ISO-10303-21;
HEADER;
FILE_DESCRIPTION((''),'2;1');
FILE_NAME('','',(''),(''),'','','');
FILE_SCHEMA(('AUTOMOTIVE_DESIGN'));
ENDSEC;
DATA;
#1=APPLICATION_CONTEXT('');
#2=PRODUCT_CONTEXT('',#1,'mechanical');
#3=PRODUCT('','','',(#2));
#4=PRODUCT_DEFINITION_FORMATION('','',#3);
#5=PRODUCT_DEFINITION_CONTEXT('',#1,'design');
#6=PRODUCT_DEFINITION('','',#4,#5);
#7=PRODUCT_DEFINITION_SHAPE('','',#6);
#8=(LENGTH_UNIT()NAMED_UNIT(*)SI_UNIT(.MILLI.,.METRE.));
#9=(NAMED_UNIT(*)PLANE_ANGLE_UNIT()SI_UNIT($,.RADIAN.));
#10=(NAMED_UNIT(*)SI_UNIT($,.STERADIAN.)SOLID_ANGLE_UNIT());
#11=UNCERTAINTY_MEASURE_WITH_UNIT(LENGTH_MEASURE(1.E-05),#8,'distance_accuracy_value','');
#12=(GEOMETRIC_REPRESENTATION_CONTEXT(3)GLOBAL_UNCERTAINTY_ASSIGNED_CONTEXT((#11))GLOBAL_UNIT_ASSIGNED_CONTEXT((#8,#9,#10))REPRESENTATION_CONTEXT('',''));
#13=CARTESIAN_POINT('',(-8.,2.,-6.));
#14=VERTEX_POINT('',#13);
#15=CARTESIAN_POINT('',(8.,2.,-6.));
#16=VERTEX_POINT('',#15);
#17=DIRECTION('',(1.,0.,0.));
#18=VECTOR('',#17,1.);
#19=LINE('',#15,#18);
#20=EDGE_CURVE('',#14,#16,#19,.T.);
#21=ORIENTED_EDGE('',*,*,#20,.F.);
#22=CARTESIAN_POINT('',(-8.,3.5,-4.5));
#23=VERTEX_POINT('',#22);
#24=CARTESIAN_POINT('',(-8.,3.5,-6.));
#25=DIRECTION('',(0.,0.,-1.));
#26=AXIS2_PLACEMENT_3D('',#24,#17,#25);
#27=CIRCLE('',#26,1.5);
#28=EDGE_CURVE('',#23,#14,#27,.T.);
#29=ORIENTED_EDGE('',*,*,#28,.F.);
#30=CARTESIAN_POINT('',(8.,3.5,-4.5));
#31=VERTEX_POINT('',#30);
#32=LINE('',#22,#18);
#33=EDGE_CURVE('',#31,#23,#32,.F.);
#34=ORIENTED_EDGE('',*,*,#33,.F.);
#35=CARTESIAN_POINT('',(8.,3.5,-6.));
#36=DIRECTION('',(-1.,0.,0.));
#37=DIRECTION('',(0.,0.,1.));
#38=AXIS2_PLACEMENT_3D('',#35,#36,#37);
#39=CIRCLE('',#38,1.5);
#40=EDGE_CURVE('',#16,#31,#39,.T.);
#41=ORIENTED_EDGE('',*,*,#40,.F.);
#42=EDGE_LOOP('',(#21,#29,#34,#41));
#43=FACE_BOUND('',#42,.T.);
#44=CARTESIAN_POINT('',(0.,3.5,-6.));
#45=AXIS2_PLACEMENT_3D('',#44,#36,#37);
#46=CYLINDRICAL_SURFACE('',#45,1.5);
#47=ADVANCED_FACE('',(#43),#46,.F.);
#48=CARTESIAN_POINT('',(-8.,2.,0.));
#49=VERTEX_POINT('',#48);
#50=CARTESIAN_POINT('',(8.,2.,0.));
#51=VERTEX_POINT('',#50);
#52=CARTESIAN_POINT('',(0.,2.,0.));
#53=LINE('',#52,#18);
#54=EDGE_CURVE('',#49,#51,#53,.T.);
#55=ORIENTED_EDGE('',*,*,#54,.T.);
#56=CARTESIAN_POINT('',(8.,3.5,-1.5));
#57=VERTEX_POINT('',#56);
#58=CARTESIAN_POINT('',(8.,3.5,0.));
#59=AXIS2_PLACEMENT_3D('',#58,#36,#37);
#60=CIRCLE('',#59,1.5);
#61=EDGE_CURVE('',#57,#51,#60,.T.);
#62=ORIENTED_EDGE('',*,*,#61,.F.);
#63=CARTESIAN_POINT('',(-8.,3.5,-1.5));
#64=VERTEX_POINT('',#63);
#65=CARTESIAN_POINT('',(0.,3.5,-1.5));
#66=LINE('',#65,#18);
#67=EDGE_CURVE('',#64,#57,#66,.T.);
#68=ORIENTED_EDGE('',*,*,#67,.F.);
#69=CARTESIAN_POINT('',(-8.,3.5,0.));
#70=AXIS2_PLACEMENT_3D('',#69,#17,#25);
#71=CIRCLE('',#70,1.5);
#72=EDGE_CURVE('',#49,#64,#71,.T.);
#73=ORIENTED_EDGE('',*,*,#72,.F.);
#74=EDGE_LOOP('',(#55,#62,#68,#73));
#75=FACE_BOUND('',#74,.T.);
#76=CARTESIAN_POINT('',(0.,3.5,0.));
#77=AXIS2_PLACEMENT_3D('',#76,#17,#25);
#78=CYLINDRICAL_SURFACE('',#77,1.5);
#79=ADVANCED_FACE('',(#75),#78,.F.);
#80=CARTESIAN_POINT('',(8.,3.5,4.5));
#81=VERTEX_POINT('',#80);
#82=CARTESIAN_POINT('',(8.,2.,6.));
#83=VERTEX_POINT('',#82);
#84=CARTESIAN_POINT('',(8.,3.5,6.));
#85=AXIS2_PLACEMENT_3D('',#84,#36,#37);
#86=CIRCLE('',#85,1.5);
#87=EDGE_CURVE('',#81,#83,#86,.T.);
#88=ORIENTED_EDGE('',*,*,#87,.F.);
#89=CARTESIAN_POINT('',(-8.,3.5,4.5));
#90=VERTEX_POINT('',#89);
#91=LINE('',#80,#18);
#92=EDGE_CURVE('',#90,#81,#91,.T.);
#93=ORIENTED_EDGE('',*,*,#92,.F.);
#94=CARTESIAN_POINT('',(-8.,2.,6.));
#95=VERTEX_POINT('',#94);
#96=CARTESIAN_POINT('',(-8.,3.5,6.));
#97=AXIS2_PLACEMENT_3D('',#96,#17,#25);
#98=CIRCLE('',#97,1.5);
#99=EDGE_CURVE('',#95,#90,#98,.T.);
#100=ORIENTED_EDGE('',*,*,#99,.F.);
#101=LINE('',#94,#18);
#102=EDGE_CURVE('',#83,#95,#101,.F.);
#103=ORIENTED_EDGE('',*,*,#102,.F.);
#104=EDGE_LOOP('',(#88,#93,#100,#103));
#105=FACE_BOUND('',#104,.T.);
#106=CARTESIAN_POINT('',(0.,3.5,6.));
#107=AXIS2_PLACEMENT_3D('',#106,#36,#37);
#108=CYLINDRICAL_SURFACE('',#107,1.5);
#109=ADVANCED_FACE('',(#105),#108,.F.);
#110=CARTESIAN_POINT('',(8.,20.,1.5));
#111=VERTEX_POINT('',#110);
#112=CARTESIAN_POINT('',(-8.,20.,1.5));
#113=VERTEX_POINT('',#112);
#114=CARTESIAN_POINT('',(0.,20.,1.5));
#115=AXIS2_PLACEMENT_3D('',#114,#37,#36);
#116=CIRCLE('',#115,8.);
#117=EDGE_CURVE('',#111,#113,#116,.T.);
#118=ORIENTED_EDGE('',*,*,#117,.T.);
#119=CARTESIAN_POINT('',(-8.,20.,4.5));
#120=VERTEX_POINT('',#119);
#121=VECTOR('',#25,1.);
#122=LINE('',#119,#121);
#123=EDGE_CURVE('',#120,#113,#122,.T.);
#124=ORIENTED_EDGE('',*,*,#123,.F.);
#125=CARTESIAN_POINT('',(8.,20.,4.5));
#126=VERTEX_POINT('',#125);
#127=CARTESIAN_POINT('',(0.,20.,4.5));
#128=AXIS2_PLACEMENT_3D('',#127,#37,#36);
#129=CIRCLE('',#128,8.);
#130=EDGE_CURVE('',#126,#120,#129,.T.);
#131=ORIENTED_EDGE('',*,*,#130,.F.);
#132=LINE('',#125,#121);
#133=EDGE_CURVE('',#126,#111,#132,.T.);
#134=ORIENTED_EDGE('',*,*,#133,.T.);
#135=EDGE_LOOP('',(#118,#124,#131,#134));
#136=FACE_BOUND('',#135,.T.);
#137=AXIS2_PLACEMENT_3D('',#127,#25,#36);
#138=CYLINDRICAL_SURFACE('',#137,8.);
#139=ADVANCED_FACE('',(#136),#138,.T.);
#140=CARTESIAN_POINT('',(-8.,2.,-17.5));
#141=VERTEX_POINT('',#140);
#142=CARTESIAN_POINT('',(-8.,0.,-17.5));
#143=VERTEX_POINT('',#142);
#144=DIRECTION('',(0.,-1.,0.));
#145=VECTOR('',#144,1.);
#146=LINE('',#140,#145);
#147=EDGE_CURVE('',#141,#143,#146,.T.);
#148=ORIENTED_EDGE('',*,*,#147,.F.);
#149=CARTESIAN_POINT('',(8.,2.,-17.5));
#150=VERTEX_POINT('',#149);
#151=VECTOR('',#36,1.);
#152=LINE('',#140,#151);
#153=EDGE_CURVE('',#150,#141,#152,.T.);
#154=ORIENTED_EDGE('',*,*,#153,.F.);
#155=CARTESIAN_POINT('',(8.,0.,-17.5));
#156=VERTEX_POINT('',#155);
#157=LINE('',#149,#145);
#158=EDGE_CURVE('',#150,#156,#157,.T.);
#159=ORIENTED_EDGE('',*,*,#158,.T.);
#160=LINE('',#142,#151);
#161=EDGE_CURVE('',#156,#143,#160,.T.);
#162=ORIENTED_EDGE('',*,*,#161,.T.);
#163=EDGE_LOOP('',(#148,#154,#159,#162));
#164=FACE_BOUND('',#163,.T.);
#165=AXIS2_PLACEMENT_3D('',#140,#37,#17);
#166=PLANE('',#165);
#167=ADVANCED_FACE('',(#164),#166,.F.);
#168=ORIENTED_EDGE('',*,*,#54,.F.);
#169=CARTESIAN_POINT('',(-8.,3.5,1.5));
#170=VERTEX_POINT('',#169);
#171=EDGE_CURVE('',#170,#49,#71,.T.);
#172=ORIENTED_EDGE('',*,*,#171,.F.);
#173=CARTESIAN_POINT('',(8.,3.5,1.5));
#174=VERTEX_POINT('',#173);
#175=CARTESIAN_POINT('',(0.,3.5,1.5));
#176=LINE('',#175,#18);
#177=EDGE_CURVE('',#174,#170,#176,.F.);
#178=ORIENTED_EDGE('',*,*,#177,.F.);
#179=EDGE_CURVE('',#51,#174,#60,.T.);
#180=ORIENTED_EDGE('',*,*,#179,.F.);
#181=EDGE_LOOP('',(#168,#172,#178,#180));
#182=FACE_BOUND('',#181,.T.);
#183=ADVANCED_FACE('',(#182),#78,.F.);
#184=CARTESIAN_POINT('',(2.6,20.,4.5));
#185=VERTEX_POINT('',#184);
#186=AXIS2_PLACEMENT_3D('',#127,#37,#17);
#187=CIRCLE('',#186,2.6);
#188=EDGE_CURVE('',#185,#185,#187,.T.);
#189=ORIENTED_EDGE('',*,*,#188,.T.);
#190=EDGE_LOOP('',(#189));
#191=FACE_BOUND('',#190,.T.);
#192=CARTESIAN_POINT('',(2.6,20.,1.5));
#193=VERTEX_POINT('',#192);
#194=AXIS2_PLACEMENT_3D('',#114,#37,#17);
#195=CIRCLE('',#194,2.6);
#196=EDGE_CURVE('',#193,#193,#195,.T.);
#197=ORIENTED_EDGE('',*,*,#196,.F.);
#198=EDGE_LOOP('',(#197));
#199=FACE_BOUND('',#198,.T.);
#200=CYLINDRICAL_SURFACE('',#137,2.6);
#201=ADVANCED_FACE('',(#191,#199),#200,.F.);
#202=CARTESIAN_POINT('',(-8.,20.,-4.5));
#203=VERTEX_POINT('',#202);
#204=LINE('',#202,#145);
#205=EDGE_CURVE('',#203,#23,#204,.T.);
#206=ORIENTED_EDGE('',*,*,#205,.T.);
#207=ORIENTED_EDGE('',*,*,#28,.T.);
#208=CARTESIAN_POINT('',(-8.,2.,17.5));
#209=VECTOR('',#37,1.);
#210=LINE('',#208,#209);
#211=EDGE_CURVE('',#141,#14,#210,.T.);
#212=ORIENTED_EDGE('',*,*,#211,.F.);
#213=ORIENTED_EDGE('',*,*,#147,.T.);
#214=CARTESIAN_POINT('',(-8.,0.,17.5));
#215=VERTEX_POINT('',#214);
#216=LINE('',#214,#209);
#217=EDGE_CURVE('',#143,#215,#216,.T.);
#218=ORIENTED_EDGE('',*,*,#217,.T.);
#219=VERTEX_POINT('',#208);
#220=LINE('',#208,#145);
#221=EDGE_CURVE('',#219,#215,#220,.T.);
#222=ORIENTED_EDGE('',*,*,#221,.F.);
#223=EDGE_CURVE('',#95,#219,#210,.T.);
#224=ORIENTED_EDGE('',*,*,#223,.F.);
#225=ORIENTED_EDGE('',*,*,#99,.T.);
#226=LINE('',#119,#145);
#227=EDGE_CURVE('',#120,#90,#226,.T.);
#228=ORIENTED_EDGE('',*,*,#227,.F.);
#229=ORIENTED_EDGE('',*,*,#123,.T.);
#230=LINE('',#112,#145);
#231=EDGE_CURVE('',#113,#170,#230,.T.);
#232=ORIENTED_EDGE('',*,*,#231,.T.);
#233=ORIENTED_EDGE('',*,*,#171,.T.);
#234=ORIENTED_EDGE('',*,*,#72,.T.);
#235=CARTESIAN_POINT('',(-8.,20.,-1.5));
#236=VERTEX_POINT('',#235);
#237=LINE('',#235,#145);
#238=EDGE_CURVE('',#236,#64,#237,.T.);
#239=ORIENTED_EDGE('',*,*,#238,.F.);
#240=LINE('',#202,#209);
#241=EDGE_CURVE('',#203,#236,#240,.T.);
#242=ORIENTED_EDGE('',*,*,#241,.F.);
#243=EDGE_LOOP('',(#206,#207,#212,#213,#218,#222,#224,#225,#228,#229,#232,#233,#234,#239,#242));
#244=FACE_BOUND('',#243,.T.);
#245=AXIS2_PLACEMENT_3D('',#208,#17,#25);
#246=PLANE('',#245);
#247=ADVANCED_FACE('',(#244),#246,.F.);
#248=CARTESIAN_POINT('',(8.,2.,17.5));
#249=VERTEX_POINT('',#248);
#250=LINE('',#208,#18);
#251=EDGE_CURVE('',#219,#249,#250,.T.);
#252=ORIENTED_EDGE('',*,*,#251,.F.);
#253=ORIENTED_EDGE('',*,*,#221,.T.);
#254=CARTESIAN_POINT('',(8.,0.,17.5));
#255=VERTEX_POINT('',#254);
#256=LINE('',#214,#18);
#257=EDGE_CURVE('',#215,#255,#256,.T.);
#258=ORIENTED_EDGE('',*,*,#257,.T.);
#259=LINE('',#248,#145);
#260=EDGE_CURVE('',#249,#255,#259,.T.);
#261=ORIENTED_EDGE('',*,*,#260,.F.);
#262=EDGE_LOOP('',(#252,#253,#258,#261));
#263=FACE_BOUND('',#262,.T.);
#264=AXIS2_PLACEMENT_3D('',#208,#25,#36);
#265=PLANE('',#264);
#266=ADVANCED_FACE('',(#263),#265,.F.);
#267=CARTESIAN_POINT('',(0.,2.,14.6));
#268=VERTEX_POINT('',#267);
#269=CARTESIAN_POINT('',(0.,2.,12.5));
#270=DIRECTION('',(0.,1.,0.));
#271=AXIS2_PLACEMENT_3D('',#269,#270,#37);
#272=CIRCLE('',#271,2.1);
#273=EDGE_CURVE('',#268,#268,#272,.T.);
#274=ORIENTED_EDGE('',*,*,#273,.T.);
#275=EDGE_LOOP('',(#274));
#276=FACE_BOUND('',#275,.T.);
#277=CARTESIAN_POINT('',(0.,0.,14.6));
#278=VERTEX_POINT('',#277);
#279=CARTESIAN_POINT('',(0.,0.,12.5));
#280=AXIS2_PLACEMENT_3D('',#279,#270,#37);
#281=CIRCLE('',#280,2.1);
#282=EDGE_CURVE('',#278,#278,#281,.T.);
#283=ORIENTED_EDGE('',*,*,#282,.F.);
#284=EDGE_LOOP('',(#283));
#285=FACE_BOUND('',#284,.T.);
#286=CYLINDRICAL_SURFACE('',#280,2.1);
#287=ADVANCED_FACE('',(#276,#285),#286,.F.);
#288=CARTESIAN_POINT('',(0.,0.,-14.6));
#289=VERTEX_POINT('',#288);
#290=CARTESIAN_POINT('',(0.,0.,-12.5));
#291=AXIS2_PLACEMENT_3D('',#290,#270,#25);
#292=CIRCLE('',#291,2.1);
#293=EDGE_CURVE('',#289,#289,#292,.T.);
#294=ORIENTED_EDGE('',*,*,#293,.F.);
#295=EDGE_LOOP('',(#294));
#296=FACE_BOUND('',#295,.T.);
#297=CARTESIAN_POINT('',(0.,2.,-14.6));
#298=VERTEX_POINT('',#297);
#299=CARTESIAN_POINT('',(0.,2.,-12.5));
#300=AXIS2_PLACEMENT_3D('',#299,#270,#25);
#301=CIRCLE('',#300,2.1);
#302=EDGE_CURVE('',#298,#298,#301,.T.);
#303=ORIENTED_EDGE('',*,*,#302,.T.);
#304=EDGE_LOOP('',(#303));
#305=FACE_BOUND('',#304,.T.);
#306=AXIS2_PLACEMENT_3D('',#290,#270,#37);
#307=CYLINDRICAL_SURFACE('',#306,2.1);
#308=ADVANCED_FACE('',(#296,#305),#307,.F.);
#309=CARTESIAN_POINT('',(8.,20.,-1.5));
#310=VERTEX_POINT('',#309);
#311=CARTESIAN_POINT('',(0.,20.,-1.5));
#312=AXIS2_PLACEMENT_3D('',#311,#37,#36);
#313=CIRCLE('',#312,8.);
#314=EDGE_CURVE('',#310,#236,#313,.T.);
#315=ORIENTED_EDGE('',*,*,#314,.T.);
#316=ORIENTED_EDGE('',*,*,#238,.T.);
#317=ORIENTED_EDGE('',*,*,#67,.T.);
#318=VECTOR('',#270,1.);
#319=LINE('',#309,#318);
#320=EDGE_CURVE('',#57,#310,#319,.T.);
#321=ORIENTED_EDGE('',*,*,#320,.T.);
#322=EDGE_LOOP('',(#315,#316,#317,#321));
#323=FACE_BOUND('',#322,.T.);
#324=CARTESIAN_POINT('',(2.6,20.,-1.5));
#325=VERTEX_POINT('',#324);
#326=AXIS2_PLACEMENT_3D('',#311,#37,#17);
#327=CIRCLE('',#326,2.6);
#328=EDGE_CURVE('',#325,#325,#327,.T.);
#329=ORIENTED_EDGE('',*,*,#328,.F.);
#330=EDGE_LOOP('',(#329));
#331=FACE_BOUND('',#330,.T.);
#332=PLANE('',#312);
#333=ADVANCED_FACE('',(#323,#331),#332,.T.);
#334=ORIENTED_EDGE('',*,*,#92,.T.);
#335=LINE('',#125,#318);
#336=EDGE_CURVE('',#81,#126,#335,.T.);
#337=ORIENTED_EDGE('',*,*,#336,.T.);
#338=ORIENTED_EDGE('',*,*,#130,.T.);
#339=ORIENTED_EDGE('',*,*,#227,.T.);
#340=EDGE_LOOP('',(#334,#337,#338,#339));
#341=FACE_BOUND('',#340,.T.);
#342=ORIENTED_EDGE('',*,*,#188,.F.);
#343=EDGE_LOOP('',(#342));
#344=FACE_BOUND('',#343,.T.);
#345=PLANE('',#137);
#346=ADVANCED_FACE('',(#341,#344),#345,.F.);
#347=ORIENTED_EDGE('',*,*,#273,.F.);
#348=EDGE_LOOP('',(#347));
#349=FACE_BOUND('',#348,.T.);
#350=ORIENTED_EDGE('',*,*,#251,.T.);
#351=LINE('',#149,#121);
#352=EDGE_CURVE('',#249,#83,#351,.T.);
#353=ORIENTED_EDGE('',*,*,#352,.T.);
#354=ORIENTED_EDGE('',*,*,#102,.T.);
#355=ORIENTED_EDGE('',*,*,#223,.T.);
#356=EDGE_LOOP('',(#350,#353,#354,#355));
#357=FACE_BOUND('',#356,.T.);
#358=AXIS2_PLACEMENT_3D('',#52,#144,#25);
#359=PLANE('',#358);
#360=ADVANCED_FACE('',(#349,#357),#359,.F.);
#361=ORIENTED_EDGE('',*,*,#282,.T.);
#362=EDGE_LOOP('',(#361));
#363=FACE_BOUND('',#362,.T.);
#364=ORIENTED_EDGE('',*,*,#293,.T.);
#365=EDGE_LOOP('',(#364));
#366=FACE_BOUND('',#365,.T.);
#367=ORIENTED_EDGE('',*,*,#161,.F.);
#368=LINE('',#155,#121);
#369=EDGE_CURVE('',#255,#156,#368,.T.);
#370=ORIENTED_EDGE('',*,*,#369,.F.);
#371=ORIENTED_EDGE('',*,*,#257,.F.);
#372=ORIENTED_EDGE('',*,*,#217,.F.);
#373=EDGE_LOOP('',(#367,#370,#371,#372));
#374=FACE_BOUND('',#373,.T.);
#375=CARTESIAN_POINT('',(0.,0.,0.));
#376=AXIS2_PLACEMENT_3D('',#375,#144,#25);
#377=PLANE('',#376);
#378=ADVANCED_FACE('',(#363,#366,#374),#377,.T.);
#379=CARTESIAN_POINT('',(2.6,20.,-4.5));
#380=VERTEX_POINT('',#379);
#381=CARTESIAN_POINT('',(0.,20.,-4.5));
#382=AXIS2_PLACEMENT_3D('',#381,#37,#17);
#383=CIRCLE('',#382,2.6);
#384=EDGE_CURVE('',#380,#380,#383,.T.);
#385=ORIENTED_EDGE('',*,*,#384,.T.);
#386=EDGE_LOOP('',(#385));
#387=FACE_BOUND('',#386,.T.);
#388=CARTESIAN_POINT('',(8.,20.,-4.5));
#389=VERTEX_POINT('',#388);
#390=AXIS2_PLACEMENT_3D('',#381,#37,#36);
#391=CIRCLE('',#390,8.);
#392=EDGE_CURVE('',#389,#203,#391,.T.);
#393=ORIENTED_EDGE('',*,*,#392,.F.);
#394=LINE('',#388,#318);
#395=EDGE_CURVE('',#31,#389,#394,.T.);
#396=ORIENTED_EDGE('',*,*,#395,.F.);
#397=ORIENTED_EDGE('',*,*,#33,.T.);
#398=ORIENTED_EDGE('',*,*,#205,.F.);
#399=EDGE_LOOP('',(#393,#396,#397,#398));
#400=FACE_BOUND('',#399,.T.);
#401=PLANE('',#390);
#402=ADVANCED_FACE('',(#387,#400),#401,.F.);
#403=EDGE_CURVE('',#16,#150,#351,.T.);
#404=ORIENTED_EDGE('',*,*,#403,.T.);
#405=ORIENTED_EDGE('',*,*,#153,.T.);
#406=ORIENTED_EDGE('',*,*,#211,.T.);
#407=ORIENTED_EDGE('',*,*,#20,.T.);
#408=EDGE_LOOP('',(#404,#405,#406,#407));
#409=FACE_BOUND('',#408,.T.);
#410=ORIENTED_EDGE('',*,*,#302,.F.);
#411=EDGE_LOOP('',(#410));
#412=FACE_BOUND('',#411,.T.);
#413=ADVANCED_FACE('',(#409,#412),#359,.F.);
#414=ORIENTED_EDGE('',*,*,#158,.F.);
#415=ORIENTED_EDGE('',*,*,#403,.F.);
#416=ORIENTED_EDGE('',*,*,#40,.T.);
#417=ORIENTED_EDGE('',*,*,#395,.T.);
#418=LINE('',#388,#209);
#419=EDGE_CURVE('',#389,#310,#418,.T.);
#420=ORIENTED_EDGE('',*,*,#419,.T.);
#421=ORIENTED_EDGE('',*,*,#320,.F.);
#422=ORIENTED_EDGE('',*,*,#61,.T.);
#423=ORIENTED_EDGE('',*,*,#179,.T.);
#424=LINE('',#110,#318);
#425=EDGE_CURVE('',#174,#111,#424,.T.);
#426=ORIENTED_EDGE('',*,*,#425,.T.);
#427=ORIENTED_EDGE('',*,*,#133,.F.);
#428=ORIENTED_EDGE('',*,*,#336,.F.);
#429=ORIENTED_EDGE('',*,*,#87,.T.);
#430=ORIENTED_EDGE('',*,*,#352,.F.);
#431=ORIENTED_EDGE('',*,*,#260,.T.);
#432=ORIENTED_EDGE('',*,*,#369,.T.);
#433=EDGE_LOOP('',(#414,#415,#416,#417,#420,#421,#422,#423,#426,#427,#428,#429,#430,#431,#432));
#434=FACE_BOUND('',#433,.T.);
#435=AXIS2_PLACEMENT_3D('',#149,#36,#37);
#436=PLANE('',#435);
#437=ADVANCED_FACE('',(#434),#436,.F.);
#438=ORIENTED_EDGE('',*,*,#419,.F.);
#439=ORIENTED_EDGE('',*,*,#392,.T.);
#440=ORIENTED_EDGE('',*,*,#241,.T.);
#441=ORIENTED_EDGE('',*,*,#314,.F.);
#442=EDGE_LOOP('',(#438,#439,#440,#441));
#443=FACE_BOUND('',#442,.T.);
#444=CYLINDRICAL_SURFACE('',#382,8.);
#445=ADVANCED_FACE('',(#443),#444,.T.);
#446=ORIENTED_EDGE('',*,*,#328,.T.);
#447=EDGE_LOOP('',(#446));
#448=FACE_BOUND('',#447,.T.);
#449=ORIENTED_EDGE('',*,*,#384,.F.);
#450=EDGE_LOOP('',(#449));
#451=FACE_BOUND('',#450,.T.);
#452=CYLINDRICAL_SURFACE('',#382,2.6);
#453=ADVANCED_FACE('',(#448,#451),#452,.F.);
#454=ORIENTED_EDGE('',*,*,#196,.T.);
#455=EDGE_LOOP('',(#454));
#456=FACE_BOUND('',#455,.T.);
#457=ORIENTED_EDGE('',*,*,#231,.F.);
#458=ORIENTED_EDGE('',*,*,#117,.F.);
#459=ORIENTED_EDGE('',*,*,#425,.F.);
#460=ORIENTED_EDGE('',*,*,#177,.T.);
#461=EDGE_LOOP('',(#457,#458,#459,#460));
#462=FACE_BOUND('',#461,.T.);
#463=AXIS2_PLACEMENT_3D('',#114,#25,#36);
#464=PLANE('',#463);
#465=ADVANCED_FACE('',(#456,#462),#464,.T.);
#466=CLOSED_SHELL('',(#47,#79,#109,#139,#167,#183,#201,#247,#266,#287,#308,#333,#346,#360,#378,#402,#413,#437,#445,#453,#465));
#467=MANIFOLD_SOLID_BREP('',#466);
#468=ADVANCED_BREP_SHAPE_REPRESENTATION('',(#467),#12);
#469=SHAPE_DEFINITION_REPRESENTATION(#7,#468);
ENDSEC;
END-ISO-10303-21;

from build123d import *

# Parameters (mm, degrees)
SKETCH_2_W          = 16
SKETCH_2_H          = 35
EXTRUDE_1_DEPTH     = 2
EXTRUDE_START       = 1.5
SKETCH_4_R          = 2.6
EXTRUDE_2_DEPTH     = 3
FILLET_2_R          = 1.5
SKETCH_5_R          = 2.1
CUT_EXTRUDE_1_DEPTH = 33.345787979


with BuildPart() as part:
    # 草圖2 → 填料-伸長1 (new body)
    with BuildSketch(Plane(origin=(0, 0, 0), x_dir=(1, 0, 0), z_dir=(0, 1, 0))):
        Rectangle(SKETCH_2_W, SKETCH_2_H)
    extrude(amount=EXTRUDE_1_DEPTH)

    # 草圖4 → 填料-伸長2 (add)
    with BuildSketch(Plane.XY.offset(EXTRUDE_START)):
        with BuildLine():
            Line((8, 20), (8, 2))
            Line((8, 2), (-8, 2))
            Line((-8, 2), (-8, 20))
            ThreePointArc((-8, 20), (0, 28), (8, 20))
        make_face()
        with Locations((0, 20)):
            Circle(SKETCH_4_R, mode=Mode.SUBTRACT)
    extrude_2 = extrude(amount=EXTRUDE_2_DEPTH)

    # 鏡射1: 填料-伸長2 across plane
    add(extrude_2.mirror(Plane.XY))

    # 圓角2
    fillet_2_edges = [part.edges().sort_by_distance(p)[0] for p in [
        (0, 2, 4.5),
        (0, 2, 1.5),
        (0, 2, -4.5),
        (0, 2, -1.5),
    ]]
    fillet(fillet_2_edges, radius=FILLET_2_R - 0.0001)  # a hair under: the kernel refuses the full size

    # 草圖5 → 除料-伸長1 (cut, through all)
    with BuildSketch(Plane(origin=(0, 2, 0), x_dir=(1, 0, 0), z_dir=(0, 1, 0))):
        with Locations(Location((0, -12.5, 0), (0, 0, 270))):
            Circle(SKETCH_5_R)
        with Locations(Location((0, 12.5, 0), (0, 0, 90))):
            Circle(SKETCH_5_R)
    extrude(amount=-CUT_EXTRUDE_1_DEPTH, mode=Mode.SUBTRACT)


solid = part.part
